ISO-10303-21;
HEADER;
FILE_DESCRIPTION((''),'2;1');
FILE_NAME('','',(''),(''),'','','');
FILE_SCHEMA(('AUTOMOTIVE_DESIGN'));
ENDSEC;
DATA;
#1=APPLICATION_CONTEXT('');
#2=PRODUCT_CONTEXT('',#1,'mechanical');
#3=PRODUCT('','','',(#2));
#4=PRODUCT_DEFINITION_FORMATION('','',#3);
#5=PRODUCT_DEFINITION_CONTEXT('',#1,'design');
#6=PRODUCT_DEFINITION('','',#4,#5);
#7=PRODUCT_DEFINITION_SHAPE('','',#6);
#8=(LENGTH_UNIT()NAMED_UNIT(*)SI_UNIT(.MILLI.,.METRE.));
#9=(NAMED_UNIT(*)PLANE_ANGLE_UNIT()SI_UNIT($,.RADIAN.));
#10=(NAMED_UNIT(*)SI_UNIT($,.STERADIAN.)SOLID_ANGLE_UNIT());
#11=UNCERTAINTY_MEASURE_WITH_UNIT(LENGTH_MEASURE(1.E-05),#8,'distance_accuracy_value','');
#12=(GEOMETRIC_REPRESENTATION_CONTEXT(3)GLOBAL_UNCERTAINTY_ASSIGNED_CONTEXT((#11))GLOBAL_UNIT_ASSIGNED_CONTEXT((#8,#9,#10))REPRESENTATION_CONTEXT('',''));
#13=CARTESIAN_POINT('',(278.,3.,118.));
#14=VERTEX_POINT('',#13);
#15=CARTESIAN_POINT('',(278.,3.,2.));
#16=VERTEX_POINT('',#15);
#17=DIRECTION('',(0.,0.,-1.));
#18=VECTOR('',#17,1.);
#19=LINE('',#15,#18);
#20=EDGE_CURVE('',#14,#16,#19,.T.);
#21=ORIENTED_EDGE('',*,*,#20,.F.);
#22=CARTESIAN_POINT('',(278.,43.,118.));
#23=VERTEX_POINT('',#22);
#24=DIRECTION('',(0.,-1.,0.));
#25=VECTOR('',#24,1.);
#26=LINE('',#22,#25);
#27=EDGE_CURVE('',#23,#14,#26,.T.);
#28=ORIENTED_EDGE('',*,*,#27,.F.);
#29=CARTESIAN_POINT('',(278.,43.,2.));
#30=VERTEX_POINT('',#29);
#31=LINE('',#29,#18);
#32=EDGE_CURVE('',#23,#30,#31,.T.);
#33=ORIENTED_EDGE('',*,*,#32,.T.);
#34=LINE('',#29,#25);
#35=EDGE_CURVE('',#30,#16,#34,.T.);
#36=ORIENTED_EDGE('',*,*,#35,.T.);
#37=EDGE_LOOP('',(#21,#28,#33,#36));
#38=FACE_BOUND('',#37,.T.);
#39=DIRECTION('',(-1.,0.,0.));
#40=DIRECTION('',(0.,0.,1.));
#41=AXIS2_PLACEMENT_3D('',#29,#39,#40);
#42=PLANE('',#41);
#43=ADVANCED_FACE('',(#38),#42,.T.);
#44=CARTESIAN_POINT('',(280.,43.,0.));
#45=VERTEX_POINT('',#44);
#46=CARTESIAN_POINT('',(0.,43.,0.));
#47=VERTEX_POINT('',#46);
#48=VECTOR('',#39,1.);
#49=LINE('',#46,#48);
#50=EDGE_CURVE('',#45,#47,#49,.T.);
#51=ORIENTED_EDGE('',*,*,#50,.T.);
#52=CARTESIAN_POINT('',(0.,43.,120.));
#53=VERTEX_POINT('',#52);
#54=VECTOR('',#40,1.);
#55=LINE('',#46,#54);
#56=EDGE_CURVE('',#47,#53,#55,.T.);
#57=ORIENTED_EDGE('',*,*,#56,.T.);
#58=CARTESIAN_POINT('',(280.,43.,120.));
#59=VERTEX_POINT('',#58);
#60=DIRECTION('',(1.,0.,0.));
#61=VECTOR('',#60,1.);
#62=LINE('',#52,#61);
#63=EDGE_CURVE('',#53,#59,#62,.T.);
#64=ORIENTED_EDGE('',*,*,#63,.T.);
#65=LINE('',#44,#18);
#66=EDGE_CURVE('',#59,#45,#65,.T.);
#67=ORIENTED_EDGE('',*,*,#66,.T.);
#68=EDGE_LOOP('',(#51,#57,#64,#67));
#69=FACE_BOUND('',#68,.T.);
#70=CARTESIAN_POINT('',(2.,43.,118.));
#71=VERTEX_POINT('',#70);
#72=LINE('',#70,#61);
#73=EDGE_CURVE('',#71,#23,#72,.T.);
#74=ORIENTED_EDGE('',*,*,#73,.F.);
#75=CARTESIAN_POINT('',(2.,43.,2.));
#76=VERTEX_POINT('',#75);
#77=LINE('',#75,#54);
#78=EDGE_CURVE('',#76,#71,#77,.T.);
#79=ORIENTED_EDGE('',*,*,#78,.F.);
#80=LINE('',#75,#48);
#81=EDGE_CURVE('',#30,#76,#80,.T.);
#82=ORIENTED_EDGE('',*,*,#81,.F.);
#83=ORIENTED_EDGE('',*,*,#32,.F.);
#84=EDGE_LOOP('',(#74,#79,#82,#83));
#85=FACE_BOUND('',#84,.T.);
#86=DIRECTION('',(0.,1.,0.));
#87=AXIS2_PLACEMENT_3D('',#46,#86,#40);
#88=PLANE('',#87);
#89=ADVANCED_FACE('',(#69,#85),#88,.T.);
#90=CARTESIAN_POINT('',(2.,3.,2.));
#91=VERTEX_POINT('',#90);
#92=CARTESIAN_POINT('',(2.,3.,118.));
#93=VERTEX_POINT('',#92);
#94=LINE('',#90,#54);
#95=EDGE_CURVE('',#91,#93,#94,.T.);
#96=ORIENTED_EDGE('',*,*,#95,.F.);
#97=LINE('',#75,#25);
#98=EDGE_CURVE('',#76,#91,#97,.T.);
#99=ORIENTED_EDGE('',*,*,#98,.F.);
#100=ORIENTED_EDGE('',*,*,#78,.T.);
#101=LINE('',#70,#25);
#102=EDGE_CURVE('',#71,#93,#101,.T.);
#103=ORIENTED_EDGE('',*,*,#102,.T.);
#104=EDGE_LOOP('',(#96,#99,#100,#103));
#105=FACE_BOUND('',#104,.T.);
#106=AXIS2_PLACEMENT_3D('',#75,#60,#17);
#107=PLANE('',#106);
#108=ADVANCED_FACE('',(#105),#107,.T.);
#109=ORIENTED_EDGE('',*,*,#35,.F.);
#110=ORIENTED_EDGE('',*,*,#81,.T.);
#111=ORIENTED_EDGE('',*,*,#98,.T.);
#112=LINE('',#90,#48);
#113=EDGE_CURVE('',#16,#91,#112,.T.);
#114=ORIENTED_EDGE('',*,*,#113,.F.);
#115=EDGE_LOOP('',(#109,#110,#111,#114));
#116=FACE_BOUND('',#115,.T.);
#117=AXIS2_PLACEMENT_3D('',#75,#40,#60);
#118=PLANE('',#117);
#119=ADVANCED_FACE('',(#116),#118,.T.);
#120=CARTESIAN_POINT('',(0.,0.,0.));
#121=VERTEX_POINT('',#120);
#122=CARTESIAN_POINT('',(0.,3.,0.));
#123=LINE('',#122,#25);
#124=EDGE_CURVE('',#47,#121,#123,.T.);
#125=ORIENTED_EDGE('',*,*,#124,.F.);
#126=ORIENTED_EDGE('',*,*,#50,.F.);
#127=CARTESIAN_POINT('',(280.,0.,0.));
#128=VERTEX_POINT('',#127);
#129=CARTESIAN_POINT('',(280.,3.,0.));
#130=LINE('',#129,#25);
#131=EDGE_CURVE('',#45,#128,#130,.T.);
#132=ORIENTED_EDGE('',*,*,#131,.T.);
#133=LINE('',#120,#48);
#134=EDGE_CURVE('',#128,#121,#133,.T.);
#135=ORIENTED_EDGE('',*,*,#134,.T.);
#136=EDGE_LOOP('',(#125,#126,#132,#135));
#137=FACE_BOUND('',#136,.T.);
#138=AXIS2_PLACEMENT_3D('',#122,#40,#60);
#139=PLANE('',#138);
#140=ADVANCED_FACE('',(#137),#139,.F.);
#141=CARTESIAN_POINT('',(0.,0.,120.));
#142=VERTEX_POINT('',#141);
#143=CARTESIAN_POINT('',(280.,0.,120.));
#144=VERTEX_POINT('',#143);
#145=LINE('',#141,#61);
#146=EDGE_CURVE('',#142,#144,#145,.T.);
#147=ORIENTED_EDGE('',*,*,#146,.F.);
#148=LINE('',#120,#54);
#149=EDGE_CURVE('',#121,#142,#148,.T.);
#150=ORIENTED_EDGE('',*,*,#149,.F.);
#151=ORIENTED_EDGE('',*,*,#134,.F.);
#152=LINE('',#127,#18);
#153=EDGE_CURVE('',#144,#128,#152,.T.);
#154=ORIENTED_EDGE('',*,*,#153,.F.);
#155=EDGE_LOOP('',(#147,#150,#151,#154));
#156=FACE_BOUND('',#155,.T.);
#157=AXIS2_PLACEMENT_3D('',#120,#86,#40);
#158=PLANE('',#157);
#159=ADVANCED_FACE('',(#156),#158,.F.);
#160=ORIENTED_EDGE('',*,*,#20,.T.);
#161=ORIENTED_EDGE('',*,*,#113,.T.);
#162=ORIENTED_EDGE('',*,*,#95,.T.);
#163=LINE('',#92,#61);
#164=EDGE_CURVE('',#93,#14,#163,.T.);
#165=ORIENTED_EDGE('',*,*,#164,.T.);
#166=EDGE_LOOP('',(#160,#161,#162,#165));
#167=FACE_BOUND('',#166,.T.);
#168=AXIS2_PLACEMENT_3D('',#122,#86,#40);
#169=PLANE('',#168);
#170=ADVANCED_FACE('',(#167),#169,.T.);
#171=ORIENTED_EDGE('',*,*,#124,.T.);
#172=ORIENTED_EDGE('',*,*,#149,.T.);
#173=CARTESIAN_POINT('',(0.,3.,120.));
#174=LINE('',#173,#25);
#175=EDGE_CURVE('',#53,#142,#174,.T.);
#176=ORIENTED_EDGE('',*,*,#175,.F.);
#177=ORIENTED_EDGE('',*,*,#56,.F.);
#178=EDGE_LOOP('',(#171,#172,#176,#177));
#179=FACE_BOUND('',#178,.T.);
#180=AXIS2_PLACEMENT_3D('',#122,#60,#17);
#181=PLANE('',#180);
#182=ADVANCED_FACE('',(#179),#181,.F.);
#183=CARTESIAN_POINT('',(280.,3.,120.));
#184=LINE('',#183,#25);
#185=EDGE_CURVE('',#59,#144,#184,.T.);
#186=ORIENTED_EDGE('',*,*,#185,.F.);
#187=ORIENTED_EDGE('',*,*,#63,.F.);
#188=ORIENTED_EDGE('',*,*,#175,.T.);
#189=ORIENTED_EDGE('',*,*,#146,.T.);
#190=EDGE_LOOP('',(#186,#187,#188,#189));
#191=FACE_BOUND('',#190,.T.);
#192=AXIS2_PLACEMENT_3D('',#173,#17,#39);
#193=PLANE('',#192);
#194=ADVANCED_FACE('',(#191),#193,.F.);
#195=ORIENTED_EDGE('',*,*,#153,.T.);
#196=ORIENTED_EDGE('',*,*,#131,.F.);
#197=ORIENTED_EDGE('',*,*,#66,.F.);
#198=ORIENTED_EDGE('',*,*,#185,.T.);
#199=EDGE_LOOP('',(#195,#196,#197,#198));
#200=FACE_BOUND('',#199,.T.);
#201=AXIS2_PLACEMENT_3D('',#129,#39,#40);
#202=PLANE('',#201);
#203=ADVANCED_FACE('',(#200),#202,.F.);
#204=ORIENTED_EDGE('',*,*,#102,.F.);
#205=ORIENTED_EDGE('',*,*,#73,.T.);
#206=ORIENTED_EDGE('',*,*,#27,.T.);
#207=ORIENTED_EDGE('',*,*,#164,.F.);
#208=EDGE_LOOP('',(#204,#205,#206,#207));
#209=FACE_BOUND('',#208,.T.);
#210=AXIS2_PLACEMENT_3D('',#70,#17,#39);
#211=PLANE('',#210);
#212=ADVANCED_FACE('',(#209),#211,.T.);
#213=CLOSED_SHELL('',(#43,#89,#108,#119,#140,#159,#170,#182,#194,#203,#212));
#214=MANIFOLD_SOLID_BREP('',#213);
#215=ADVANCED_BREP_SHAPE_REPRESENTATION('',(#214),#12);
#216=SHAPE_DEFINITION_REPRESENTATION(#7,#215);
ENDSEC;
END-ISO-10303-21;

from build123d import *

# Parameters (mm, degrees)
SKETCH1_W           = 280
SKETCH1_H           = 120
BOSS_EXTRUDE1_DEPTH = 3
SKETCH2_W           = 280
SKETCH2_H           = 120
SKETCH2_W_2         = 276
SKETCH2_H_2         = 116
BOSS_EXTRUDE2_DEPTH = 40


with BuildPart() as part:
    # Sketch1 → Boss-Extrude1 (new body)
    with BuildSketch(Plane(origin=(0, 0, 0), x_dir=(1, 0, 0), z_dir=(0, 1, 0))):
        with Locations((140, -60)):
            Rectangle(SKETCH1_W, SKETCH1_H)
    extrude(amount=BOSS_EXTRUDE1_DEPTH)

    # Sketch2 → Boss-Extrude2 (add)
    with BuildSketch(Plane(origin=(0, 3, 0), x_dir=(1, 0, 0), z_dir=(0, 1, 0))):
        with Locations((140, -60)):
            Rectangle(SKETCH2_W, SKETCH2_H)
        with Locations((140, -60)):
            Rectangle(SKETCH2_W_2, SKETCH2_H_2, mode=Mode.SUBTRACT)
    extrude(amount=BOSS_EXTRUDE2_DEPTH)


solid = part.part
